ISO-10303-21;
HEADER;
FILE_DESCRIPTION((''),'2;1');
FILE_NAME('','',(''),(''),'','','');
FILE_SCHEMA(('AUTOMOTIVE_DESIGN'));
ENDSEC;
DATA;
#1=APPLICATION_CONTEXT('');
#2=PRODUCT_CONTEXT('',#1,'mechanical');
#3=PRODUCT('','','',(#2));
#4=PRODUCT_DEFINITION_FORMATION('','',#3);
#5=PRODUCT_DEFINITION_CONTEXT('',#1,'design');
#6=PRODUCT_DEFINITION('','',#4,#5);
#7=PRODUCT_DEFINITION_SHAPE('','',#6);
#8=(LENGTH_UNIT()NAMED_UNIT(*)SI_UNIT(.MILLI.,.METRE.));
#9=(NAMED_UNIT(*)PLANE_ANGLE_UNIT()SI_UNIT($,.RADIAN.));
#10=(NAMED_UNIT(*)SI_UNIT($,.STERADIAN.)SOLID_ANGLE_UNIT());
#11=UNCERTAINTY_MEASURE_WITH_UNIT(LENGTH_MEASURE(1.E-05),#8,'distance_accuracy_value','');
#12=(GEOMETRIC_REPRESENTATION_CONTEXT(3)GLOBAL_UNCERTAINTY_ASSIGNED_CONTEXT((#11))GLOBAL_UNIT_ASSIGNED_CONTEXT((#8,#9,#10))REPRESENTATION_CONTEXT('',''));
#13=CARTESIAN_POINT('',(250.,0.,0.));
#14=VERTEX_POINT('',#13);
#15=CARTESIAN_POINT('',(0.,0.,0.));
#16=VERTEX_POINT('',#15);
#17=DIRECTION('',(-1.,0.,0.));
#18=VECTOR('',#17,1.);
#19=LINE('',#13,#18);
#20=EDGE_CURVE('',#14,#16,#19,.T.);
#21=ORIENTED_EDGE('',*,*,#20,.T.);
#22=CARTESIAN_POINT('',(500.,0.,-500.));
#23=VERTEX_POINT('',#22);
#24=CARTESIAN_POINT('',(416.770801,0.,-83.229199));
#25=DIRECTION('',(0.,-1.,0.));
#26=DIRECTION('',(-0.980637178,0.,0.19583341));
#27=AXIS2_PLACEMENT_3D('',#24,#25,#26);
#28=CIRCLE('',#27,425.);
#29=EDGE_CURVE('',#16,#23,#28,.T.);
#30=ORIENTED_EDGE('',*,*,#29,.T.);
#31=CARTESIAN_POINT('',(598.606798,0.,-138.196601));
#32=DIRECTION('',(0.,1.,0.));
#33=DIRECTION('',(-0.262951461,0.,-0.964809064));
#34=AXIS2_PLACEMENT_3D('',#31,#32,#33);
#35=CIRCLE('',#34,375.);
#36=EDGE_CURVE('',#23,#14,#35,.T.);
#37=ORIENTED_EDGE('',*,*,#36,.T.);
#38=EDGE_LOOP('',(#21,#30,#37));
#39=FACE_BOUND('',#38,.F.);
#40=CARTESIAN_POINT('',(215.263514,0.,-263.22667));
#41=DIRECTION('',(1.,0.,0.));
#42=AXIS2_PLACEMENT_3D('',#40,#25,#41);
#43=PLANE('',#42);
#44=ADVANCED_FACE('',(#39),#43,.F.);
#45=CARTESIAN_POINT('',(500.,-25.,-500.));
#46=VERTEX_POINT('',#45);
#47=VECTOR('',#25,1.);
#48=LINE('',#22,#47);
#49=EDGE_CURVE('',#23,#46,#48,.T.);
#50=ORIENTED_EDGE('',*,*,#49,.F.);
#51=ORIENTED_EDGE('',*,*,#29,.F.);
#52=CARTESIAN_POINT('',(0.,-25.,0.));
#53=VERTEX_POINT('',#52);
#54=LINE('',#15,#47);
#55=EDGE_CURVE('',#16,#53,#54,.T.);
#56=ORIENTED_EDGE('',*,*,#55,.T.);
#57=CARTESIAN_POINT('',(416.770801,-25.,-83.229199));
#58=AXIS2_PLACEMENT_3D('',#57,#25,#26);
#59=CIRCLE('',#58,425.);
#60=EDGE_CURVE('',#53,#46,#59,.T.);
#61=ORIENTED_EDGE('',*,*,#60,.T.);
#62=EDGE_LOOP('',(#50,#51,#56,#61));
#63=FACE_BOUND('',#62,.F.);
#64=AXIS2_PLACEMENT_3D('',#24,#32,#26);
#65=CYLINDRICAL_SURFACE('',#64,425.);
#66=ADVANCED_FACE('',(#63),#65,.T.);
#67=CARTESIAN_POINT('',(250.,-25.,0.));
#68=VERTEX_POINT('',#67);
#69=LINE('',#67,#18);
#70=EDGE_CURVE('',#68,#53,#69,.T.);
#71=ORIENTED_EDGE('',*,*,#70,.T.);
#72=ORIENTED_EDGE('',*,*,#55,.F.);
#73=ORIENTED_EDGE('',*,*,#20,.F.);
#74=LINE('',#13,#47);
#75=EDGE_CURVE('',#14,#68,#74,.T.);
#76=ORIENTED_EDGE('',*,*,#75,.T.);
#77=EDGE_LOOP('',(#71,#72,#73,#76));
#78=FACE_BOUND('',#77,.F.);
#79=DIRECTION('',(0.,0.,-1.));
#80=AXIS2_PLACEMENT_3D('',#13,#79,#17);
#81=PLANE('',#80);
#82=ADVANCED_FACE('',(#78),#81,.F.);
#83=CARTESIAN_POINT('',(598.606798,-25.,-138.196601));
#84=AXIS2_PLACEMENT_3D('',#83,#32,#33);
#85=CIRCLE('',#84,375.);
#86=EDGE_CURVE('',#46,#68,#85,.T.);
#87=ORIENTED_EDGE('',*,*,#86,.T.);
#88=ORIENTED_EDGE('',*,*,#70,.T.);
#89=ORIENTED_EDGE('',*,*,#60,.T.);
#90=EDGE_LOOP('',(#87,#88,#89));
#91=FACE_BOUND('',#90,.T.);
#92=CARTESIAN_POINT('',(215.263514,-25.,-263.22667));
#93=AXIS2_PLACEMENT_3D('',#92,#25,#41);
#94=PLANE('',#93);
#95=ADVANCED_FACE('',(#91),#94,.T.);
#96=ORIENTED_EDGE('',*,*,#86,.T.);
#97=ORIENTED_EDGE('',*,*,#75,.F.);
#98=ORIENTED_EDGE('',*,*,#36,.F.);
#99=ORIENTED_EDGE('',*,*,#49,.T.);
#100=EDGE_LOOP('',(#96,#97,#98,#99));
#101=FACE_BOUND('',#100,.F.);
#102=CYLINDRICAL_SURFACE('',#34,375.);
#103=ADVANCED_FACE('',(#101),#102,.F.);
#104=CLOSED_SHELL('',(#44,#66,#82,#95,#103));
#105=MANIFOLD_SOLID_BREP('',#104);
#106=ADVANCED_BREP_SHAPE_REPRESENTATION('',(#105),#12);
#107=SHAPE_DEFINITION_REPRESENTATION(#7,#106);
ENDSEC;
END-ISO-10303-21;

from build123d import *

# Parameters (mm, degrees)
F1_DEPTH = 25


# Not quite as in the source:
# - a feature names something its author has since deleted; it is built from what else it names


with BuildPart() as f1:
    # F0 (on Front) → F1 (new body)
    with BuildSketch(Plane.XZ):
        with BuildLine():
            Line((250, 0), (0, 0))
            ThreePointArc((0, 0), (116.2504187973, -383.7495812027), (500, -500))
            ThreePointArc((500, -500), (263.196601125, -305.9016994375), (250, 0))
        make_face()
    extrude(amount=F1_DEPTH)


solid = f1.part
